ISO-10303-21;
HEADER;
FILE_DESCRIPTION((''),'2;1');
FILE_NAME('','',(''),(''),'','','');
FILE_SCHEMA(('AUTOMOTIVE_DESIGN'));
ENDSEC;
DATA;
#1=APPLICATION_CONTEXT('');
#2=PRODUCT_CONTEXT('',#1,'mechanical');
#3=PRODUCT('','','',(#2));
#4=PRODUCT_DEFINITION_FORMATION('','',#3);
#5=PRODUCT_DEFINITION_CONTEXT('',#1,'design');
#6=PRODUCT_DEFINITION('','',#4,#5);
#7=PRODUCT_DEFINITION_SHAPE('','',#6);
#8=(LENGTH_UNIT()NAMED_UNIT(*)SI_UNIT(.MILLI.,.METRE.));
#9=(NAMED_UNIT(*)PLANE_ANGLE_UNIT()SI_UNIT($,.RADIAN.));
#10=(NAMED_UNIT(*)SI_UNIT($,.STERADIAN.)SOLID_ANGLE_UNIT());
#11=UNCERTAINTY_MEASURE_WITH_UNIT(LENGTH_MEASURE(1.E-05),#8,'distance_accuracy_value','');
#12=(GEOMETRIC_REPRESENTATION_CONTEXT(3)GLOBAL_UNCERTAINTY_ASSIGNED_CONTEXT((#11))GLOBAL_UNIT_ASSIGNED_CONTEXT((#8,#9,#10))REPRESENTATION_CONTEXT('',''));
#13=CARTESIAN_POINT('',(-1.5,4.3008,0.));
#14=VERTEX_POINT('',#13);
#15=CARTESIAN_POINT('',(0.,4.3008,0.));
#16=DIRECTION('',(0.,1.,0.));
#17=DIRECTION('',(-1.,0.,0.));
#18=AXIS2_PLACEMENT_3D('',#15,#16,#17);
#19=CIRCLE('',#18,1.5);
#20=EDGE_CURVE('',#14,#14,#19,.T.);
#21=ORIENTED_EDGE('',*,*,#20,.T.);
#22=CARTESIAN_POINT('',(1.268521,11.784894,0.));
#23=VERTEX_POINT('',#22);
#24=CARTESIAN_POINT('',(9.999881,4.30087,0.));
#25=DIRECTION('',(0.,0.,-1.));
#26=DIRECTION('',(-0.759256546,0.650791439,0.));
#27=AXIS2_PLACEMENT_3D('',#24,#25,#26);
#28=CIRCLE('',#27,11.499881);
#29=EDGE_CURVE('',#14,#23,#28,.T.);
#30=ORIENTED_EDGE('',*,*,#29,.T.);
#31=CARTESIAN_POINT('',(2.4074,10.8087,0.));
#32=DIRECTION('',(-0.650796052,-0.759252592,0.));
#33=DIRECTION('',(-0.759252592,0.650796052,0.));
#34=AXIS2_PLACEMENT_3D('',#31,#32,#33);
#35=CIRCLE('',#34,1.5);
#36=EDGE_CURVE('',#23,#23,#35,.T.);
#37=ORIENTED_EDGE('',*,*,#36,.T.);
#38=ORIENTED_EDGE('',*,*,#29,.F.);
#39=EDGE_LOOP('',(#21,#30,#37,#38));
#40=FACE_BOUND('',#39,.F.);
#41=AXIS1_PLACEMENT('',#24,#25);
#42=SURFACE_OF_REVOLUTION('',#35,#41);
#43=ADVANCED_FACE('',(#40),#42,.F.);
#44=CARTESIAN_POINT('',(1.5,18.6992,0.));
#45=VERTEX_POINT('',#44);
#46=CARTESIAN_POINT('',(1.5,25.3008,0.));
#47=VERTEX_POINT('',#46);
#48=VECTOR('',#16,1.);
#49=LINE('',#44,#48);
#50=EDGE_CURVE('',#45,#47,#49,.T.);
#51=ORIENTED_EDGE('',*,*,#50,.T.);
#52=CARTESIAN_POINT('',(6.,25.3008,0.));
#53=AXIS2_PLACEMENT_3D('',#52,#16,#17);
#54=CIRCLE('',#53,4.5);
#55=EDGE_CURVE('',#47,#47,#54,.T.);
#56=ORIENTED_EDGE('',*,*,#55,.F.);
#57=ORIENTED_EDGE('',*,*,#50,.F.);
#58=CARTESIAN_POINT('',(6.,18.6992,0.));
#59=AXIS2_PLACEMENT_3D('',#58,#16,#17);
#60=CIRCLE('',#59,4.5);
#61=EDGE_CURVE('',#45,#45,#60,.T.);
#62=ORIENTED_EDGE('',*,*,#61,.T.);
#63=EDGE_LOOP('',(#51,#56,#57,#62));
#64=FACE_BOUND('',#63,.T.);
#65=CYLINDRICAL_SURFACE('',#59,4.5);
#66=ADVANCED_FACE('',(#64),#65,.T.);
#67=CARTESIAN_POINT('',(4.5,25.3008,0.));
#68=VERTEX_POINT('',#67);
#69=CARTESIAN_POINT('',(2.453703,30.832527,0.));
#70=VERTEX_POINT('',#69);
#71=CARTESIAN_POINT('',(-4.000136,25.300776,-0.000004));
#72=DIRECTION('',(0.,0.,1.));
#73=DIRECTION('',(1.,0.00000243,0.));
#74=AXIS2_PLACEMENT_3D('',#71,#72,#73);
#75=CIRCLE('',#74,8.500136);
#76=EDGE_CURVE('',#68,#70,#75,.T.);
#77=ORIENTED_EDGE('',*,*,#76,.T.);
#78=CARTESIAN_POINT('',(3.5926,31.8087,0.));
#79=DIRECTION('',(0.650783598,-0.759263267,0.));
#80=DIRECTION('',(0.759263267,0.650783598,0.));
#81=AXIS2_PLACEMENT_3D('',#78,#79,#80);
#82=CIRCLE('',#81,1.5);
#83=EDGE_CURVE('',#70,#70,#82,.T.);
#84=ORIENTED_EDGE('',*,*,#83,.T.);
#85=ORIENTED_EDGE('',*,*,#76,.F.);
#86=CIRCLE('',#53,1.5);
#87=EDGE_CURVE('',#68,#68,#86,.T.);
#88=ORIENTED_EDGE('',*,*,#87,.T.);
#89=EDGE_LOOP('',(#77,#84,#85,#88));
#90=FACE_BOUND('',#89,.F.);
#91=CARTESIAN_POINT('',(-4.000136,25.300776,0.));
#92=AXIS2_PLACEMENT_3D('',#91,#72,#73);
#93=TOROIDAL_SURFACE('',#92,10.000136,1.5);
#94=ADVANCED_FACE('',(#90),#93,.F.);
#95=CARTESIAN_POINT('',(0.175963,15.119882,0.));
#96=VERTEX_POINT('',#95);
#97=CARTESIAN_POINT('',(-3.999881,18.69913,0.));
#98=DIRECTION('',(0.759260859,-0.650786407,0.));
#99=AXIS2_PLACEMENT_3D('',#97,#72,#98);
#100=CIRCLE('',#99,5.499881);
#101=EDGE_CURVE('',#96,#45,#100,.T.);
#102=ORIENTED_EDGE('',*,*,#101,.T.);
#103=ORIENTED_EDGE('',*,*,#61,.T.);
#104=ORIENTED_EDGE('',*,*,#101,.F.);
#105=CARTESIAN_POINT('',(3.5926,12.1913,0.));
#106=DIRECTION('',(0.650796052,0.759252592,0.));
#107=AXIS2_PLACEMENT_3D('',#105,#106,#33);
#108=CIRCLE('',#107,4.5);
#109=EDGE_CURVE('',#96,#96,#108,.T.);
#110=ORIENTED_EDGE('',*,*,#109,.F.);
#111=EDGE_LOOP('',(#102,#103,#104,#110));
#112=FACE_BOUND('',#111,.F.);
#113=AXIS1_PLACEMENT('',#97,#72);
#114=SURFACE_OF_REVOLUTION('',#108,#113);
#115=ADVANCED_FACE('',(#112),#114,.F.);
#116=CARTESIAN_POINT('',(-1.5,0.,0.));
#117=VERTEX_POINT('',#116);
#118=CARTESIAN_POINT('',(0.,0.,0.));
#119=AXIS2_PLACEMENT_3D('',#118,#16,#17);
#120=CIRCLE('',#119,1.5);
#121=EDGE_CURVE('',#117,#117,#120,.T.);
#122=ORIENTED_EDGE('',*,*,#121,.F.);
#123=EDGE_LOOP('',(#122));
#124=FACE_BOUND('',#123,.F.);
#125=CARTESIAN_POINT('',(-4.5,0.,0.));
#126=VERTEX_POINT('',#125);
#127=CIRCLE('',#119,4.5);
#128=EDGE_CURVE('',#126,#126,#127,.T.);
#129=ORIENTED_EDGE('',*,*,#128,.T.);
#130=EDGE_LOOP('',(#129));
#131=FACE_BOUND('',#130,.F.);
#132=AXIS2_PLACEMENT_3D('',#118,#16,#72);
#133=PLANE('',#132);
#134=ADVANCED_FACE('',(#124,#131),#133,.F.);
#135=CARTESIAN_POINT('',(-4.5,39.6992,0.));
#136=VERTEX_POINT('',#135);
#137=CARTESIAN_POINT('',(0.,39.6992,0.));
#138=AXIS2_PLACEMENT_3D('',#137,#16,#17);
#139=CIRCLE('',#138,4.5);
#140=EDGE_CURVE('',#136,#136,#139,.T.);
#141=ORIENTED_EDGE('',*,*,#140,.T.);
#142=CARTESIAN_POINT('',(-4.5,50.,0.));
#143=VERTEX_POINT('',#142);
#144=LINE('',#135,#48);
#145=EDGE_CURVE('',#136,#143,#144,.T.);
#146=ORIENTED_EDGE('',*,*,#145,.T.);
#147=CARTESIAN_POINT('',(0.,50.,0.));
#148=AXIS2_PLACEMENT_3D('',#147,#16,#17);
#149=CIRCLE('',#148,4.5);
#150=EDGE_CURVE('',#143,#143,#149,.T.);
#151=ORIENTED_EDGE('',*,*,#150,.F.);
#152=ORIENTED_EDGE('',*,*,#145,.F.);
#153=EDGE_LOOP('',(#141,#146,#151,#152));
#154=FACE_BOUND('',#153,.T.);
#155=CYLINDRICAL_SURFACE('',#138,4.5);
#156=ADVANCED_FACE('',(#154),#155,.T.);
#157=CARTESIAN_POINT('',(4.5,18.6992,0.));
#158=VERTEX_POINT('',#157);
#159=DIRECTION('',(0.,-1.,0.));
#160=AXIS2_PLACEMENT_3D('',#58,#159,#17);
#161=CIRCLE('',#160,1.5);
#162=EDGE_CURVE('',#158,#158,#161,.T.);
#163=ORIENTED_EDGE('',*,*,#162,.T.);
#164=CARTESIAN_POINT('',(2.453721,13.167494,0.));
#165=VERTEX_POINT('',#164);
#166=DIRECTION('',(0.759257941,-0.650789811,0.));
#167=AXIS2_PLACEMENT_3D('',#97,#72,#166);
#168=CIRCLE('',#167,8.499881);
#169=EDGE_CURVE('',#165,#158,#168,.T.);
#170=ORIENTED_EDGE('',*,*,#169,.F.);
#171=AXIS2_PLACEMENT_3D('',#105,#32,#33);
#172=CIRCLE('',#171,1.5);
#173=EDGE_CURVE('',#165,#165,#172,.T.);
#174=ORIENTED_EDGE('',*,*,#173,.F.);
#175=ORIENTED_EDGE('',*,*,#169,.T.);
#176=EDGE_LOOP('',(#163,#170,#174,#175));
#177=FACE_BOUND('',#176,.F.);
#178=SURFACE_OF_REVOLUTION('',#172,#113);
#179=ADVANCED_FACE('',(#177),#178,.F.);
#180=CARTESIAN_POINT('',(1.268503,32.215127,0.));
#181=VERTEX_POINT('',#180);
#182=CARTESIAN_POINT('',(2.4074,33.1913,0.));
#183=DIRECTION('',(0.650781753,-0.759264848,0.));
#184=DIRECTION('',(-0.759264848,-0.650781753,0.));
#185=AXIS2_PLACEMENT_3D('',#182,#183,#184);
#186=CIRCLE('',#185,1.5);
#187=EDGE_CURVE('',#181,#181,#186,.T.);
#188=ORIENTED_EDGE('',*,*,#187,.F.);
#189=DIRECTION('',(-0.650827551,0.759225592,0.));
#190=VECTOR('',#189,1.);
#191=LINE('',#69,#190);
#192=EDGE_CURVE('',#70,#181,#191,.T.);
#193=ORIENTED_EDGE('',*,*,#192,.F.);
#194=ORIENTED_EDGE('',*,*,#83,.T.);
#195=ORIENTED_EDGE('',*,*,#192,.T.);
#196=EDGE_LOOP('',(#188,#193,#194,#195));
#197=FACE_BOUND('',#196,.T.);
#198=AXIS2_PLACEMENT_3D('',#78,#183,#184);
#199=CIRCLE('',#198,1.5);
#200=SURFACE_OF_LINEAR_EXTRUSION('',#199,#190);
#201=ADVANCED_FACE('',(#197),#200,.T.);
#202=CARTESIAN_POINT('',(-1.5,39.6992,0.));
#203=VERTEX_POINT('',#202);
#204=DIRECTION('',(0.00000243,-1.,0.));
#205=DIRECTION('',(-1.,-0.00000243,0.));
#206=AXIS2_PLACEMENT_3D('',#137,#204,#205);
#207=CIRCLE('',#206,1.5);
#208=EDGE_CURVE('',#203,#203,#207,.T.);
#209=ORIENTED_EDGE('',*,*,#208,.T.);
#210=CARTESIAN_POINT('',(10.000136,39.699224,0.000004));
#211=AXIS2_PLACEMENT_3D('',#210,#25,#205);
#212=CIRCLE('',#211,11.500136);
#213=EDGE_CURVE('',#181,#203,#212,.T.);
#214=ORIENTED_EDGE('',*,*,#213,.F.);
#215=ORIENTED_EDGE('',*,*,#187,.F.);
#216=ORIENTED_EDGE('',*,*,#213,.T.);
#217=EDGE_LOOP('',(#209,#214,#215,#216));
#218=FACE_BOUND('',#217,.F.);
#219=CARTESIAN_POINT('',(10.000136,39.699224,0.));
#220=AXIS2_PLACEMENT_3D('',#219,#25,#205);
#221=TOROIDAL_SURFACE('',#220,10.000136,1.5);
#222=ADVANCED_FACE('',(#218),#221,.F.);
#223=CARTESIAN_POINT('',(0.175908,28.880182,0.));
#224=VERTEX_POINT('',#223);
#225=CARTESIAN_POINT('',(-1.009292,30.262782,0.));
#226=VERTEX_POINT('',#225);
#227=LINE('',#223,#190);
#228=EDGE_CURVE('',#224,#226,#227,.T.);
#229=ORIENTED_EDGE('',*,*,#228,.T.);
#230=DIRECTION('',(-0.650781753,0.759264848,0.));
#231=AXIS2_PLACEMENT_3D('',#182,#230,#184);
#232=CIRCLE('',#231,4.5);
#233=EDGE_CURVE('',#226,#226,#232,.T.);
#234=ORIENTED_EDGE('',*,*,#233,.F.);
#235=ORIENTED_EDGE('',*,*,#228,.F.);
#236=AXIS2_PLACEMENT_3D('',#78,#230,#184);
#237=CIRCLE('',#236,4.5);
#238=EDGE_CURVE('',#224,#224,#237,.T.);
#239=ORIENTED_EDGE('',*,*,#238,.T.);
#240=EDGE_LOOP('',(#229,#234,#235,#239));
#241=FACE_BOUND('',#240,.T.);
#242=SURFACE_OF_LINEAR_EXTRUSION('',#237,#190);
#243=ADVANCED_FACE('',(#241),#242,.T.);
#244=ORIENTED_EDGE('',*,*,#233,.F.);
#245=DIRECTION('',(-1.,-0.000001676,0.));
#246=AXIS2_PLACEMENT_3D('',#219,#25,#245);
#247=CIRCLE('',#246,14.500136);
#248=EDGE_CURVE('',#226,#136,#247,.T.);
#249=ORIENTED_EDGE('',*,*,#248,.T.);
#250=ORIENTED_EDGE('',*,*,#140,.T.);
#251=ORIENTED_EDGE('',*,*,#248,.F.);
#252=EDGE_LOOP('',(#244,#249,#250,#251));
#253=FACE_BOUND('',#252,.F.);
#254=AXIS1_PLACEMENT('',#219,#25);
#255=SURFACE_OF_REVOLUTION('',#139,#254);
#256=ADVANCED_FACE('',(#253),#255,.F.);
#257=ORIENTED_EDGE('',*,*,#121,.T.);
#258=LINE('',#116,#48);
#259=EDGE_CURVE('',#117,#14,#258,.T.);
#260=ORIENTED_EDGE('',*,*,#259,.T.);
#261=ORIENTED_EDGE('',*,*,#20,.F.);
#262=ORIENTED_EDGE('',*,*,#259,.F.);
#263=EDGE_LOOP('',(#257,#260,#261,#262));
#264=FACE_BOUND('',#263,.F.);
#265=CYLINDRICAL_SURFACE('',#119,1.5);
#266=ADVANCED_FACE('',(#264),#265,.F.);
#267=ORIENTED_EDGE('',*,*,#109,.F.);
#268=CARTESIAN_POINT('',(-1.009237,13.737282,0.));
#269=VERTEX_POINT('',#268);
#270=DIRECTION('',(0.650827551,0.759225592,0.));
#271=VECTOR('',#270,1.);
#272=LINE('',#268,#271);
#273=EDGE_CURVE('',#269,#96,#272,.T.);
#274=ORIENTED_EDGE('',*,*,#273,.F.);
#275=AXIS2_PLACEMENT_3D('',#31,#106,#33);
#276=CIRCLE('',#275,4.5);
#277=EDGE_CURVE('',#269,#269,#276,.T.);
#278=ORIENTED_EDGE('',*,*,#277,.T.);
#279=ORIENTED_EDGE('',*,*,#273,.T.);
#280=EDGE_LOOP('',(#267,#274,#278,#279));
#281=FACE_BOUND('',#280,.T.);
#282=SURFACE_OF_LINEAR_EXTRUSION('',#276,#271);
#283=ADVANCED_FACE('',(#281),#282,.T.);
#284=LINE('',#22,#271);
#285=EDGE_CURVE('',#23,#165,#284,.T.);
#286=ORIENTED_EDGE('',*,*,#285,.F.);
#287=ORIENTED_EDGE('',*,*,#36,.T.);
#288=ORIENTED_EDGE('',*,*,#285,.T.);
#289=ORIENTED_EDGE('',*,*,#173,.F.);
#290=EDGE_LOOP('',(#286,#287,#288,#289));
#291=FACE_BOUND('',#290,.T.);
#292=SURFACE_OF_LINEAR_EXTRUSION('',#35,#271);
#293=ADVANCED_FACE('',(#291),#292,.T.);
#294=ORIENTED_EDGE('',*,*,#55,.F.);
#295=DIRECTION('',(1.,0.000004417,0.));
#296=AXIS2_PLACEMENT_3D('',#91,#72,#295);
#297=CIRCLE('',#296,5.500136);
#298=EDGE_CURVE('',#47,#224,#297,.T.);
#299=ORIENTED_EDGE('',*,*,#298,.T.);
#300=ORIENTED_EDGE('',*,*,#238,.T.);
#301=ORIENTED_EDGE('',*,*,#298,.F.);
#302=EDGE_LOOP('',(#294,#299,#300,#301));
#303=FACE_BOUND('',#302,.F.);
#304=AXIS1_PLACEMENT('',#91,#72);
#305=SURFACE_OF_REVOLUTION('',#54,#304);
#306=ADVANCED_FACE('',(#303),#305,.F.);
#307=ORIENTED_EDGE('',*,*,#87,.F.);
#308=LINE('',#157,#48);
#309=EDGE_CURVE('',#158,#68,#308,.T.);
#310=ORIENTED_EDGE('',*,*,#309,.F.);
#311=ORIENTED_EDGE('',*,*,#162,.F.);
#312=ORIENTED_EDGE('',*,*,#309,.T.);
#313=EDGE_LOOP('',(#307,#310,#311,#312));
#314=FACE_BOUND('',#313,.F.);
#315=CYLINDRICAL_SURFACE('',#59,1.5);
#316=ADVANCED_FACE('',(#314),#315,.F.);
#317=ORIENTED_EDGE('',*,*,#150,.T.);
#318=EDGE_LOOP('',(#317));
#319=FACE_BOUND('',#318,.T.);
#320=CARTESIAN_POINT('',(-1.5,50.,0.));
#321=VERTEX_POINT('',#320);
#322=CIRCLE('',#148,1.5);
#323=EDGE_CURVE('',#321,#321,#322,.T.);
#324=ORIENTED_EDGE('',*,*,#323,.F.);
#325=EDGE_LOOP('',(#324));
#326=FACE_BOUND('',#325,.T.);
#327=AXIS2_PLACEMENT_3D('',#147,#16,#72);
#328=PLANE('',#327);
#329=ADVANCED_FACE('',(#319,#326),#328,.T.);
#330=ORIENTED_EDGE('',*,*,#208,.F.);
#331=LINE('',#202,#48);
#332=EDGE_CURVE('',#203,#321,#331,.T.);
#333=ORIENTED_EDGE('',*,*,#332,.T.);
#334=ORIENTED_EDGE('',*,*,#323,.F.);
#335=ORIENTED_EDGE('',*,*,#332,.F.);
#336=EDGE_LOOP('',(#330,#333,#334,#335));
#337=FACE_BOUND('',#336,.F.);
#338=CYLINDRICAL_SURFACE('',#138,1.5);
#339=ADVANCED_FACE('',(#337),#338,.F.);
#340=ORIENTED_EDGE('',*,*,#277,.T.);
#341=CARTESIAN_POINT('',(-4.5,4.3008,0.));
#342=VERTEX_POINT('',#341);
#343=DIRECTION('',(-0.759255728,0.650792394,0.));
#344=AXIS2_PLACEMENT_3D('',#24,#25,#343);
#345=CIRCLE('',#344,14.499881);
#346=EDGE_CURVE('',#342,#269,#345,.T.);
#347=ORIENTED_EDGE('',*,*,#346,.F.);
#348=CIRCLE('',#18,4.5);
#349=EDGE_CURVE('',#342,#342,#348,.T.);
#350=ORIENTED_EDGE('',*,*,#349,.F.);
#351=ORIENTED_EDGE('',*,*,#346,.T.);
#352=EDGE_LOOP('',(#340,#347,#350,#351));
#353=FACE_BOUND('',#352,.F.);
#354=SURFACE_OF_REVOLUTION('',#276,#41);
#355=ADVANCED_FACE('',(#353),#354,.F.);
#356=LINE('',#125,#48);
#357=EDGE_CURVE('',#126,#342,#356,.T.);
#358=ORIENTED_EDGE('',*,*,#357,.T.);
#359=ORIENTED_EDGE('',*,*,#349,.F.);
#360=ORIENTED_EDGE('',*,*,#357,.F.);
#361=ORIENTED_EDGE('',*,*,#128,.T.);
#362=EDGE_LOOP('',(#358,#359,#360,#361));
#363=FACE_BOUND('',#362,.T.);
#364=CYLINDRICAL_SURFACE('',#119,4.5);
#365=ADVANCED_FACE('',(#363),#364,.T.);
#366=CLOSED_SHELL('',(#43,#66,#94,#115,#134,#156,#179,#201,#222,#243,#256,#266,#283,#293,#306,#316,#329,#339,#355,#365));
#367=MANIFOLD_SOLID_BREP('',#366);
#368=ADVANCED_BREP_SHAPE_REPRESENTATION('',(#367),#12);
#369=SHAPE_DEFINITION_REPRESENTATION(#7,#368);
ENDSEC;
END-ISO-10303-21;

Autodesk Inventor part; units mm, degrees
ref_plane "YZ Plane" through (0, 0, 0) normal (1, 0, 0) x (0, 1, 0)
ref_plane "XZ Plane" through (0, 0, 0) normal (0, 1, 0) x (-1, 0, 0)
ref_plane "XY Plane" through (0, 0, 0) normal (0, 0, 1) x (1, 0, 0)
sketch "Sketch1" plane through (0, 0, 0) normal (0, 1, 0) x (-1, 0, 0)
  circle A0 centre (0, 0) radius 1.5
  circle A1 centre (0, 0) radius 4.5
  dimension "d0" = 3
  dimension "d1" = 9
sketch "Sketch2" plane through (0, 0, 0) normal (0, 0, 1) x (1, 0, 0)
  line L0 (0, 0) -> (0, 4.3008)
  line L1 (2.4074, 10.8087) -> (3.5926, 12.1913)
  line L2 (6, 18.6992) -> (6, 25.3008)
  line L3 (3.5926, 31.8087) -> (2.4074, 33.1913)
  line L4 (0, 39.6992) -> (0, 50)
  line L5 (6, 22) -> (-6.3181, 22) construction
  arc A0 (2.4074, 10.8087) -> (0, 4.3008) centre (10, 4.3008) ccw
  arc A1 (3.5926, 12.1913) -> (6, 18.6992) centre (-4, 18.6992) ccw
  arc A2 (6, 25.3008) -> (3.5926, 31.8087) centre (-4, 25.3008) ccw
  arc A3 (0, 39.6992) -> (2.4074, 33.1913) centre (10, 39.6992) ccw
  point P0 (0, 8)
  point P1 (6, 15)
  point P2 (6, 29)
  point P3 (0, 36)
  dimension "d4" = 8
  dimension "d5" = 50
  dimension "d6" = 7
  dimension "d7" = 7
  dimension "d8" = 14
  dimension "d9" = 22
  dimension "d10" = 6
  dimension "d11" = 10
sweep "Sweep1" add profiles "Sketch1" path "Sketch2"
properties part number "BottomTopPlateSpacer"
